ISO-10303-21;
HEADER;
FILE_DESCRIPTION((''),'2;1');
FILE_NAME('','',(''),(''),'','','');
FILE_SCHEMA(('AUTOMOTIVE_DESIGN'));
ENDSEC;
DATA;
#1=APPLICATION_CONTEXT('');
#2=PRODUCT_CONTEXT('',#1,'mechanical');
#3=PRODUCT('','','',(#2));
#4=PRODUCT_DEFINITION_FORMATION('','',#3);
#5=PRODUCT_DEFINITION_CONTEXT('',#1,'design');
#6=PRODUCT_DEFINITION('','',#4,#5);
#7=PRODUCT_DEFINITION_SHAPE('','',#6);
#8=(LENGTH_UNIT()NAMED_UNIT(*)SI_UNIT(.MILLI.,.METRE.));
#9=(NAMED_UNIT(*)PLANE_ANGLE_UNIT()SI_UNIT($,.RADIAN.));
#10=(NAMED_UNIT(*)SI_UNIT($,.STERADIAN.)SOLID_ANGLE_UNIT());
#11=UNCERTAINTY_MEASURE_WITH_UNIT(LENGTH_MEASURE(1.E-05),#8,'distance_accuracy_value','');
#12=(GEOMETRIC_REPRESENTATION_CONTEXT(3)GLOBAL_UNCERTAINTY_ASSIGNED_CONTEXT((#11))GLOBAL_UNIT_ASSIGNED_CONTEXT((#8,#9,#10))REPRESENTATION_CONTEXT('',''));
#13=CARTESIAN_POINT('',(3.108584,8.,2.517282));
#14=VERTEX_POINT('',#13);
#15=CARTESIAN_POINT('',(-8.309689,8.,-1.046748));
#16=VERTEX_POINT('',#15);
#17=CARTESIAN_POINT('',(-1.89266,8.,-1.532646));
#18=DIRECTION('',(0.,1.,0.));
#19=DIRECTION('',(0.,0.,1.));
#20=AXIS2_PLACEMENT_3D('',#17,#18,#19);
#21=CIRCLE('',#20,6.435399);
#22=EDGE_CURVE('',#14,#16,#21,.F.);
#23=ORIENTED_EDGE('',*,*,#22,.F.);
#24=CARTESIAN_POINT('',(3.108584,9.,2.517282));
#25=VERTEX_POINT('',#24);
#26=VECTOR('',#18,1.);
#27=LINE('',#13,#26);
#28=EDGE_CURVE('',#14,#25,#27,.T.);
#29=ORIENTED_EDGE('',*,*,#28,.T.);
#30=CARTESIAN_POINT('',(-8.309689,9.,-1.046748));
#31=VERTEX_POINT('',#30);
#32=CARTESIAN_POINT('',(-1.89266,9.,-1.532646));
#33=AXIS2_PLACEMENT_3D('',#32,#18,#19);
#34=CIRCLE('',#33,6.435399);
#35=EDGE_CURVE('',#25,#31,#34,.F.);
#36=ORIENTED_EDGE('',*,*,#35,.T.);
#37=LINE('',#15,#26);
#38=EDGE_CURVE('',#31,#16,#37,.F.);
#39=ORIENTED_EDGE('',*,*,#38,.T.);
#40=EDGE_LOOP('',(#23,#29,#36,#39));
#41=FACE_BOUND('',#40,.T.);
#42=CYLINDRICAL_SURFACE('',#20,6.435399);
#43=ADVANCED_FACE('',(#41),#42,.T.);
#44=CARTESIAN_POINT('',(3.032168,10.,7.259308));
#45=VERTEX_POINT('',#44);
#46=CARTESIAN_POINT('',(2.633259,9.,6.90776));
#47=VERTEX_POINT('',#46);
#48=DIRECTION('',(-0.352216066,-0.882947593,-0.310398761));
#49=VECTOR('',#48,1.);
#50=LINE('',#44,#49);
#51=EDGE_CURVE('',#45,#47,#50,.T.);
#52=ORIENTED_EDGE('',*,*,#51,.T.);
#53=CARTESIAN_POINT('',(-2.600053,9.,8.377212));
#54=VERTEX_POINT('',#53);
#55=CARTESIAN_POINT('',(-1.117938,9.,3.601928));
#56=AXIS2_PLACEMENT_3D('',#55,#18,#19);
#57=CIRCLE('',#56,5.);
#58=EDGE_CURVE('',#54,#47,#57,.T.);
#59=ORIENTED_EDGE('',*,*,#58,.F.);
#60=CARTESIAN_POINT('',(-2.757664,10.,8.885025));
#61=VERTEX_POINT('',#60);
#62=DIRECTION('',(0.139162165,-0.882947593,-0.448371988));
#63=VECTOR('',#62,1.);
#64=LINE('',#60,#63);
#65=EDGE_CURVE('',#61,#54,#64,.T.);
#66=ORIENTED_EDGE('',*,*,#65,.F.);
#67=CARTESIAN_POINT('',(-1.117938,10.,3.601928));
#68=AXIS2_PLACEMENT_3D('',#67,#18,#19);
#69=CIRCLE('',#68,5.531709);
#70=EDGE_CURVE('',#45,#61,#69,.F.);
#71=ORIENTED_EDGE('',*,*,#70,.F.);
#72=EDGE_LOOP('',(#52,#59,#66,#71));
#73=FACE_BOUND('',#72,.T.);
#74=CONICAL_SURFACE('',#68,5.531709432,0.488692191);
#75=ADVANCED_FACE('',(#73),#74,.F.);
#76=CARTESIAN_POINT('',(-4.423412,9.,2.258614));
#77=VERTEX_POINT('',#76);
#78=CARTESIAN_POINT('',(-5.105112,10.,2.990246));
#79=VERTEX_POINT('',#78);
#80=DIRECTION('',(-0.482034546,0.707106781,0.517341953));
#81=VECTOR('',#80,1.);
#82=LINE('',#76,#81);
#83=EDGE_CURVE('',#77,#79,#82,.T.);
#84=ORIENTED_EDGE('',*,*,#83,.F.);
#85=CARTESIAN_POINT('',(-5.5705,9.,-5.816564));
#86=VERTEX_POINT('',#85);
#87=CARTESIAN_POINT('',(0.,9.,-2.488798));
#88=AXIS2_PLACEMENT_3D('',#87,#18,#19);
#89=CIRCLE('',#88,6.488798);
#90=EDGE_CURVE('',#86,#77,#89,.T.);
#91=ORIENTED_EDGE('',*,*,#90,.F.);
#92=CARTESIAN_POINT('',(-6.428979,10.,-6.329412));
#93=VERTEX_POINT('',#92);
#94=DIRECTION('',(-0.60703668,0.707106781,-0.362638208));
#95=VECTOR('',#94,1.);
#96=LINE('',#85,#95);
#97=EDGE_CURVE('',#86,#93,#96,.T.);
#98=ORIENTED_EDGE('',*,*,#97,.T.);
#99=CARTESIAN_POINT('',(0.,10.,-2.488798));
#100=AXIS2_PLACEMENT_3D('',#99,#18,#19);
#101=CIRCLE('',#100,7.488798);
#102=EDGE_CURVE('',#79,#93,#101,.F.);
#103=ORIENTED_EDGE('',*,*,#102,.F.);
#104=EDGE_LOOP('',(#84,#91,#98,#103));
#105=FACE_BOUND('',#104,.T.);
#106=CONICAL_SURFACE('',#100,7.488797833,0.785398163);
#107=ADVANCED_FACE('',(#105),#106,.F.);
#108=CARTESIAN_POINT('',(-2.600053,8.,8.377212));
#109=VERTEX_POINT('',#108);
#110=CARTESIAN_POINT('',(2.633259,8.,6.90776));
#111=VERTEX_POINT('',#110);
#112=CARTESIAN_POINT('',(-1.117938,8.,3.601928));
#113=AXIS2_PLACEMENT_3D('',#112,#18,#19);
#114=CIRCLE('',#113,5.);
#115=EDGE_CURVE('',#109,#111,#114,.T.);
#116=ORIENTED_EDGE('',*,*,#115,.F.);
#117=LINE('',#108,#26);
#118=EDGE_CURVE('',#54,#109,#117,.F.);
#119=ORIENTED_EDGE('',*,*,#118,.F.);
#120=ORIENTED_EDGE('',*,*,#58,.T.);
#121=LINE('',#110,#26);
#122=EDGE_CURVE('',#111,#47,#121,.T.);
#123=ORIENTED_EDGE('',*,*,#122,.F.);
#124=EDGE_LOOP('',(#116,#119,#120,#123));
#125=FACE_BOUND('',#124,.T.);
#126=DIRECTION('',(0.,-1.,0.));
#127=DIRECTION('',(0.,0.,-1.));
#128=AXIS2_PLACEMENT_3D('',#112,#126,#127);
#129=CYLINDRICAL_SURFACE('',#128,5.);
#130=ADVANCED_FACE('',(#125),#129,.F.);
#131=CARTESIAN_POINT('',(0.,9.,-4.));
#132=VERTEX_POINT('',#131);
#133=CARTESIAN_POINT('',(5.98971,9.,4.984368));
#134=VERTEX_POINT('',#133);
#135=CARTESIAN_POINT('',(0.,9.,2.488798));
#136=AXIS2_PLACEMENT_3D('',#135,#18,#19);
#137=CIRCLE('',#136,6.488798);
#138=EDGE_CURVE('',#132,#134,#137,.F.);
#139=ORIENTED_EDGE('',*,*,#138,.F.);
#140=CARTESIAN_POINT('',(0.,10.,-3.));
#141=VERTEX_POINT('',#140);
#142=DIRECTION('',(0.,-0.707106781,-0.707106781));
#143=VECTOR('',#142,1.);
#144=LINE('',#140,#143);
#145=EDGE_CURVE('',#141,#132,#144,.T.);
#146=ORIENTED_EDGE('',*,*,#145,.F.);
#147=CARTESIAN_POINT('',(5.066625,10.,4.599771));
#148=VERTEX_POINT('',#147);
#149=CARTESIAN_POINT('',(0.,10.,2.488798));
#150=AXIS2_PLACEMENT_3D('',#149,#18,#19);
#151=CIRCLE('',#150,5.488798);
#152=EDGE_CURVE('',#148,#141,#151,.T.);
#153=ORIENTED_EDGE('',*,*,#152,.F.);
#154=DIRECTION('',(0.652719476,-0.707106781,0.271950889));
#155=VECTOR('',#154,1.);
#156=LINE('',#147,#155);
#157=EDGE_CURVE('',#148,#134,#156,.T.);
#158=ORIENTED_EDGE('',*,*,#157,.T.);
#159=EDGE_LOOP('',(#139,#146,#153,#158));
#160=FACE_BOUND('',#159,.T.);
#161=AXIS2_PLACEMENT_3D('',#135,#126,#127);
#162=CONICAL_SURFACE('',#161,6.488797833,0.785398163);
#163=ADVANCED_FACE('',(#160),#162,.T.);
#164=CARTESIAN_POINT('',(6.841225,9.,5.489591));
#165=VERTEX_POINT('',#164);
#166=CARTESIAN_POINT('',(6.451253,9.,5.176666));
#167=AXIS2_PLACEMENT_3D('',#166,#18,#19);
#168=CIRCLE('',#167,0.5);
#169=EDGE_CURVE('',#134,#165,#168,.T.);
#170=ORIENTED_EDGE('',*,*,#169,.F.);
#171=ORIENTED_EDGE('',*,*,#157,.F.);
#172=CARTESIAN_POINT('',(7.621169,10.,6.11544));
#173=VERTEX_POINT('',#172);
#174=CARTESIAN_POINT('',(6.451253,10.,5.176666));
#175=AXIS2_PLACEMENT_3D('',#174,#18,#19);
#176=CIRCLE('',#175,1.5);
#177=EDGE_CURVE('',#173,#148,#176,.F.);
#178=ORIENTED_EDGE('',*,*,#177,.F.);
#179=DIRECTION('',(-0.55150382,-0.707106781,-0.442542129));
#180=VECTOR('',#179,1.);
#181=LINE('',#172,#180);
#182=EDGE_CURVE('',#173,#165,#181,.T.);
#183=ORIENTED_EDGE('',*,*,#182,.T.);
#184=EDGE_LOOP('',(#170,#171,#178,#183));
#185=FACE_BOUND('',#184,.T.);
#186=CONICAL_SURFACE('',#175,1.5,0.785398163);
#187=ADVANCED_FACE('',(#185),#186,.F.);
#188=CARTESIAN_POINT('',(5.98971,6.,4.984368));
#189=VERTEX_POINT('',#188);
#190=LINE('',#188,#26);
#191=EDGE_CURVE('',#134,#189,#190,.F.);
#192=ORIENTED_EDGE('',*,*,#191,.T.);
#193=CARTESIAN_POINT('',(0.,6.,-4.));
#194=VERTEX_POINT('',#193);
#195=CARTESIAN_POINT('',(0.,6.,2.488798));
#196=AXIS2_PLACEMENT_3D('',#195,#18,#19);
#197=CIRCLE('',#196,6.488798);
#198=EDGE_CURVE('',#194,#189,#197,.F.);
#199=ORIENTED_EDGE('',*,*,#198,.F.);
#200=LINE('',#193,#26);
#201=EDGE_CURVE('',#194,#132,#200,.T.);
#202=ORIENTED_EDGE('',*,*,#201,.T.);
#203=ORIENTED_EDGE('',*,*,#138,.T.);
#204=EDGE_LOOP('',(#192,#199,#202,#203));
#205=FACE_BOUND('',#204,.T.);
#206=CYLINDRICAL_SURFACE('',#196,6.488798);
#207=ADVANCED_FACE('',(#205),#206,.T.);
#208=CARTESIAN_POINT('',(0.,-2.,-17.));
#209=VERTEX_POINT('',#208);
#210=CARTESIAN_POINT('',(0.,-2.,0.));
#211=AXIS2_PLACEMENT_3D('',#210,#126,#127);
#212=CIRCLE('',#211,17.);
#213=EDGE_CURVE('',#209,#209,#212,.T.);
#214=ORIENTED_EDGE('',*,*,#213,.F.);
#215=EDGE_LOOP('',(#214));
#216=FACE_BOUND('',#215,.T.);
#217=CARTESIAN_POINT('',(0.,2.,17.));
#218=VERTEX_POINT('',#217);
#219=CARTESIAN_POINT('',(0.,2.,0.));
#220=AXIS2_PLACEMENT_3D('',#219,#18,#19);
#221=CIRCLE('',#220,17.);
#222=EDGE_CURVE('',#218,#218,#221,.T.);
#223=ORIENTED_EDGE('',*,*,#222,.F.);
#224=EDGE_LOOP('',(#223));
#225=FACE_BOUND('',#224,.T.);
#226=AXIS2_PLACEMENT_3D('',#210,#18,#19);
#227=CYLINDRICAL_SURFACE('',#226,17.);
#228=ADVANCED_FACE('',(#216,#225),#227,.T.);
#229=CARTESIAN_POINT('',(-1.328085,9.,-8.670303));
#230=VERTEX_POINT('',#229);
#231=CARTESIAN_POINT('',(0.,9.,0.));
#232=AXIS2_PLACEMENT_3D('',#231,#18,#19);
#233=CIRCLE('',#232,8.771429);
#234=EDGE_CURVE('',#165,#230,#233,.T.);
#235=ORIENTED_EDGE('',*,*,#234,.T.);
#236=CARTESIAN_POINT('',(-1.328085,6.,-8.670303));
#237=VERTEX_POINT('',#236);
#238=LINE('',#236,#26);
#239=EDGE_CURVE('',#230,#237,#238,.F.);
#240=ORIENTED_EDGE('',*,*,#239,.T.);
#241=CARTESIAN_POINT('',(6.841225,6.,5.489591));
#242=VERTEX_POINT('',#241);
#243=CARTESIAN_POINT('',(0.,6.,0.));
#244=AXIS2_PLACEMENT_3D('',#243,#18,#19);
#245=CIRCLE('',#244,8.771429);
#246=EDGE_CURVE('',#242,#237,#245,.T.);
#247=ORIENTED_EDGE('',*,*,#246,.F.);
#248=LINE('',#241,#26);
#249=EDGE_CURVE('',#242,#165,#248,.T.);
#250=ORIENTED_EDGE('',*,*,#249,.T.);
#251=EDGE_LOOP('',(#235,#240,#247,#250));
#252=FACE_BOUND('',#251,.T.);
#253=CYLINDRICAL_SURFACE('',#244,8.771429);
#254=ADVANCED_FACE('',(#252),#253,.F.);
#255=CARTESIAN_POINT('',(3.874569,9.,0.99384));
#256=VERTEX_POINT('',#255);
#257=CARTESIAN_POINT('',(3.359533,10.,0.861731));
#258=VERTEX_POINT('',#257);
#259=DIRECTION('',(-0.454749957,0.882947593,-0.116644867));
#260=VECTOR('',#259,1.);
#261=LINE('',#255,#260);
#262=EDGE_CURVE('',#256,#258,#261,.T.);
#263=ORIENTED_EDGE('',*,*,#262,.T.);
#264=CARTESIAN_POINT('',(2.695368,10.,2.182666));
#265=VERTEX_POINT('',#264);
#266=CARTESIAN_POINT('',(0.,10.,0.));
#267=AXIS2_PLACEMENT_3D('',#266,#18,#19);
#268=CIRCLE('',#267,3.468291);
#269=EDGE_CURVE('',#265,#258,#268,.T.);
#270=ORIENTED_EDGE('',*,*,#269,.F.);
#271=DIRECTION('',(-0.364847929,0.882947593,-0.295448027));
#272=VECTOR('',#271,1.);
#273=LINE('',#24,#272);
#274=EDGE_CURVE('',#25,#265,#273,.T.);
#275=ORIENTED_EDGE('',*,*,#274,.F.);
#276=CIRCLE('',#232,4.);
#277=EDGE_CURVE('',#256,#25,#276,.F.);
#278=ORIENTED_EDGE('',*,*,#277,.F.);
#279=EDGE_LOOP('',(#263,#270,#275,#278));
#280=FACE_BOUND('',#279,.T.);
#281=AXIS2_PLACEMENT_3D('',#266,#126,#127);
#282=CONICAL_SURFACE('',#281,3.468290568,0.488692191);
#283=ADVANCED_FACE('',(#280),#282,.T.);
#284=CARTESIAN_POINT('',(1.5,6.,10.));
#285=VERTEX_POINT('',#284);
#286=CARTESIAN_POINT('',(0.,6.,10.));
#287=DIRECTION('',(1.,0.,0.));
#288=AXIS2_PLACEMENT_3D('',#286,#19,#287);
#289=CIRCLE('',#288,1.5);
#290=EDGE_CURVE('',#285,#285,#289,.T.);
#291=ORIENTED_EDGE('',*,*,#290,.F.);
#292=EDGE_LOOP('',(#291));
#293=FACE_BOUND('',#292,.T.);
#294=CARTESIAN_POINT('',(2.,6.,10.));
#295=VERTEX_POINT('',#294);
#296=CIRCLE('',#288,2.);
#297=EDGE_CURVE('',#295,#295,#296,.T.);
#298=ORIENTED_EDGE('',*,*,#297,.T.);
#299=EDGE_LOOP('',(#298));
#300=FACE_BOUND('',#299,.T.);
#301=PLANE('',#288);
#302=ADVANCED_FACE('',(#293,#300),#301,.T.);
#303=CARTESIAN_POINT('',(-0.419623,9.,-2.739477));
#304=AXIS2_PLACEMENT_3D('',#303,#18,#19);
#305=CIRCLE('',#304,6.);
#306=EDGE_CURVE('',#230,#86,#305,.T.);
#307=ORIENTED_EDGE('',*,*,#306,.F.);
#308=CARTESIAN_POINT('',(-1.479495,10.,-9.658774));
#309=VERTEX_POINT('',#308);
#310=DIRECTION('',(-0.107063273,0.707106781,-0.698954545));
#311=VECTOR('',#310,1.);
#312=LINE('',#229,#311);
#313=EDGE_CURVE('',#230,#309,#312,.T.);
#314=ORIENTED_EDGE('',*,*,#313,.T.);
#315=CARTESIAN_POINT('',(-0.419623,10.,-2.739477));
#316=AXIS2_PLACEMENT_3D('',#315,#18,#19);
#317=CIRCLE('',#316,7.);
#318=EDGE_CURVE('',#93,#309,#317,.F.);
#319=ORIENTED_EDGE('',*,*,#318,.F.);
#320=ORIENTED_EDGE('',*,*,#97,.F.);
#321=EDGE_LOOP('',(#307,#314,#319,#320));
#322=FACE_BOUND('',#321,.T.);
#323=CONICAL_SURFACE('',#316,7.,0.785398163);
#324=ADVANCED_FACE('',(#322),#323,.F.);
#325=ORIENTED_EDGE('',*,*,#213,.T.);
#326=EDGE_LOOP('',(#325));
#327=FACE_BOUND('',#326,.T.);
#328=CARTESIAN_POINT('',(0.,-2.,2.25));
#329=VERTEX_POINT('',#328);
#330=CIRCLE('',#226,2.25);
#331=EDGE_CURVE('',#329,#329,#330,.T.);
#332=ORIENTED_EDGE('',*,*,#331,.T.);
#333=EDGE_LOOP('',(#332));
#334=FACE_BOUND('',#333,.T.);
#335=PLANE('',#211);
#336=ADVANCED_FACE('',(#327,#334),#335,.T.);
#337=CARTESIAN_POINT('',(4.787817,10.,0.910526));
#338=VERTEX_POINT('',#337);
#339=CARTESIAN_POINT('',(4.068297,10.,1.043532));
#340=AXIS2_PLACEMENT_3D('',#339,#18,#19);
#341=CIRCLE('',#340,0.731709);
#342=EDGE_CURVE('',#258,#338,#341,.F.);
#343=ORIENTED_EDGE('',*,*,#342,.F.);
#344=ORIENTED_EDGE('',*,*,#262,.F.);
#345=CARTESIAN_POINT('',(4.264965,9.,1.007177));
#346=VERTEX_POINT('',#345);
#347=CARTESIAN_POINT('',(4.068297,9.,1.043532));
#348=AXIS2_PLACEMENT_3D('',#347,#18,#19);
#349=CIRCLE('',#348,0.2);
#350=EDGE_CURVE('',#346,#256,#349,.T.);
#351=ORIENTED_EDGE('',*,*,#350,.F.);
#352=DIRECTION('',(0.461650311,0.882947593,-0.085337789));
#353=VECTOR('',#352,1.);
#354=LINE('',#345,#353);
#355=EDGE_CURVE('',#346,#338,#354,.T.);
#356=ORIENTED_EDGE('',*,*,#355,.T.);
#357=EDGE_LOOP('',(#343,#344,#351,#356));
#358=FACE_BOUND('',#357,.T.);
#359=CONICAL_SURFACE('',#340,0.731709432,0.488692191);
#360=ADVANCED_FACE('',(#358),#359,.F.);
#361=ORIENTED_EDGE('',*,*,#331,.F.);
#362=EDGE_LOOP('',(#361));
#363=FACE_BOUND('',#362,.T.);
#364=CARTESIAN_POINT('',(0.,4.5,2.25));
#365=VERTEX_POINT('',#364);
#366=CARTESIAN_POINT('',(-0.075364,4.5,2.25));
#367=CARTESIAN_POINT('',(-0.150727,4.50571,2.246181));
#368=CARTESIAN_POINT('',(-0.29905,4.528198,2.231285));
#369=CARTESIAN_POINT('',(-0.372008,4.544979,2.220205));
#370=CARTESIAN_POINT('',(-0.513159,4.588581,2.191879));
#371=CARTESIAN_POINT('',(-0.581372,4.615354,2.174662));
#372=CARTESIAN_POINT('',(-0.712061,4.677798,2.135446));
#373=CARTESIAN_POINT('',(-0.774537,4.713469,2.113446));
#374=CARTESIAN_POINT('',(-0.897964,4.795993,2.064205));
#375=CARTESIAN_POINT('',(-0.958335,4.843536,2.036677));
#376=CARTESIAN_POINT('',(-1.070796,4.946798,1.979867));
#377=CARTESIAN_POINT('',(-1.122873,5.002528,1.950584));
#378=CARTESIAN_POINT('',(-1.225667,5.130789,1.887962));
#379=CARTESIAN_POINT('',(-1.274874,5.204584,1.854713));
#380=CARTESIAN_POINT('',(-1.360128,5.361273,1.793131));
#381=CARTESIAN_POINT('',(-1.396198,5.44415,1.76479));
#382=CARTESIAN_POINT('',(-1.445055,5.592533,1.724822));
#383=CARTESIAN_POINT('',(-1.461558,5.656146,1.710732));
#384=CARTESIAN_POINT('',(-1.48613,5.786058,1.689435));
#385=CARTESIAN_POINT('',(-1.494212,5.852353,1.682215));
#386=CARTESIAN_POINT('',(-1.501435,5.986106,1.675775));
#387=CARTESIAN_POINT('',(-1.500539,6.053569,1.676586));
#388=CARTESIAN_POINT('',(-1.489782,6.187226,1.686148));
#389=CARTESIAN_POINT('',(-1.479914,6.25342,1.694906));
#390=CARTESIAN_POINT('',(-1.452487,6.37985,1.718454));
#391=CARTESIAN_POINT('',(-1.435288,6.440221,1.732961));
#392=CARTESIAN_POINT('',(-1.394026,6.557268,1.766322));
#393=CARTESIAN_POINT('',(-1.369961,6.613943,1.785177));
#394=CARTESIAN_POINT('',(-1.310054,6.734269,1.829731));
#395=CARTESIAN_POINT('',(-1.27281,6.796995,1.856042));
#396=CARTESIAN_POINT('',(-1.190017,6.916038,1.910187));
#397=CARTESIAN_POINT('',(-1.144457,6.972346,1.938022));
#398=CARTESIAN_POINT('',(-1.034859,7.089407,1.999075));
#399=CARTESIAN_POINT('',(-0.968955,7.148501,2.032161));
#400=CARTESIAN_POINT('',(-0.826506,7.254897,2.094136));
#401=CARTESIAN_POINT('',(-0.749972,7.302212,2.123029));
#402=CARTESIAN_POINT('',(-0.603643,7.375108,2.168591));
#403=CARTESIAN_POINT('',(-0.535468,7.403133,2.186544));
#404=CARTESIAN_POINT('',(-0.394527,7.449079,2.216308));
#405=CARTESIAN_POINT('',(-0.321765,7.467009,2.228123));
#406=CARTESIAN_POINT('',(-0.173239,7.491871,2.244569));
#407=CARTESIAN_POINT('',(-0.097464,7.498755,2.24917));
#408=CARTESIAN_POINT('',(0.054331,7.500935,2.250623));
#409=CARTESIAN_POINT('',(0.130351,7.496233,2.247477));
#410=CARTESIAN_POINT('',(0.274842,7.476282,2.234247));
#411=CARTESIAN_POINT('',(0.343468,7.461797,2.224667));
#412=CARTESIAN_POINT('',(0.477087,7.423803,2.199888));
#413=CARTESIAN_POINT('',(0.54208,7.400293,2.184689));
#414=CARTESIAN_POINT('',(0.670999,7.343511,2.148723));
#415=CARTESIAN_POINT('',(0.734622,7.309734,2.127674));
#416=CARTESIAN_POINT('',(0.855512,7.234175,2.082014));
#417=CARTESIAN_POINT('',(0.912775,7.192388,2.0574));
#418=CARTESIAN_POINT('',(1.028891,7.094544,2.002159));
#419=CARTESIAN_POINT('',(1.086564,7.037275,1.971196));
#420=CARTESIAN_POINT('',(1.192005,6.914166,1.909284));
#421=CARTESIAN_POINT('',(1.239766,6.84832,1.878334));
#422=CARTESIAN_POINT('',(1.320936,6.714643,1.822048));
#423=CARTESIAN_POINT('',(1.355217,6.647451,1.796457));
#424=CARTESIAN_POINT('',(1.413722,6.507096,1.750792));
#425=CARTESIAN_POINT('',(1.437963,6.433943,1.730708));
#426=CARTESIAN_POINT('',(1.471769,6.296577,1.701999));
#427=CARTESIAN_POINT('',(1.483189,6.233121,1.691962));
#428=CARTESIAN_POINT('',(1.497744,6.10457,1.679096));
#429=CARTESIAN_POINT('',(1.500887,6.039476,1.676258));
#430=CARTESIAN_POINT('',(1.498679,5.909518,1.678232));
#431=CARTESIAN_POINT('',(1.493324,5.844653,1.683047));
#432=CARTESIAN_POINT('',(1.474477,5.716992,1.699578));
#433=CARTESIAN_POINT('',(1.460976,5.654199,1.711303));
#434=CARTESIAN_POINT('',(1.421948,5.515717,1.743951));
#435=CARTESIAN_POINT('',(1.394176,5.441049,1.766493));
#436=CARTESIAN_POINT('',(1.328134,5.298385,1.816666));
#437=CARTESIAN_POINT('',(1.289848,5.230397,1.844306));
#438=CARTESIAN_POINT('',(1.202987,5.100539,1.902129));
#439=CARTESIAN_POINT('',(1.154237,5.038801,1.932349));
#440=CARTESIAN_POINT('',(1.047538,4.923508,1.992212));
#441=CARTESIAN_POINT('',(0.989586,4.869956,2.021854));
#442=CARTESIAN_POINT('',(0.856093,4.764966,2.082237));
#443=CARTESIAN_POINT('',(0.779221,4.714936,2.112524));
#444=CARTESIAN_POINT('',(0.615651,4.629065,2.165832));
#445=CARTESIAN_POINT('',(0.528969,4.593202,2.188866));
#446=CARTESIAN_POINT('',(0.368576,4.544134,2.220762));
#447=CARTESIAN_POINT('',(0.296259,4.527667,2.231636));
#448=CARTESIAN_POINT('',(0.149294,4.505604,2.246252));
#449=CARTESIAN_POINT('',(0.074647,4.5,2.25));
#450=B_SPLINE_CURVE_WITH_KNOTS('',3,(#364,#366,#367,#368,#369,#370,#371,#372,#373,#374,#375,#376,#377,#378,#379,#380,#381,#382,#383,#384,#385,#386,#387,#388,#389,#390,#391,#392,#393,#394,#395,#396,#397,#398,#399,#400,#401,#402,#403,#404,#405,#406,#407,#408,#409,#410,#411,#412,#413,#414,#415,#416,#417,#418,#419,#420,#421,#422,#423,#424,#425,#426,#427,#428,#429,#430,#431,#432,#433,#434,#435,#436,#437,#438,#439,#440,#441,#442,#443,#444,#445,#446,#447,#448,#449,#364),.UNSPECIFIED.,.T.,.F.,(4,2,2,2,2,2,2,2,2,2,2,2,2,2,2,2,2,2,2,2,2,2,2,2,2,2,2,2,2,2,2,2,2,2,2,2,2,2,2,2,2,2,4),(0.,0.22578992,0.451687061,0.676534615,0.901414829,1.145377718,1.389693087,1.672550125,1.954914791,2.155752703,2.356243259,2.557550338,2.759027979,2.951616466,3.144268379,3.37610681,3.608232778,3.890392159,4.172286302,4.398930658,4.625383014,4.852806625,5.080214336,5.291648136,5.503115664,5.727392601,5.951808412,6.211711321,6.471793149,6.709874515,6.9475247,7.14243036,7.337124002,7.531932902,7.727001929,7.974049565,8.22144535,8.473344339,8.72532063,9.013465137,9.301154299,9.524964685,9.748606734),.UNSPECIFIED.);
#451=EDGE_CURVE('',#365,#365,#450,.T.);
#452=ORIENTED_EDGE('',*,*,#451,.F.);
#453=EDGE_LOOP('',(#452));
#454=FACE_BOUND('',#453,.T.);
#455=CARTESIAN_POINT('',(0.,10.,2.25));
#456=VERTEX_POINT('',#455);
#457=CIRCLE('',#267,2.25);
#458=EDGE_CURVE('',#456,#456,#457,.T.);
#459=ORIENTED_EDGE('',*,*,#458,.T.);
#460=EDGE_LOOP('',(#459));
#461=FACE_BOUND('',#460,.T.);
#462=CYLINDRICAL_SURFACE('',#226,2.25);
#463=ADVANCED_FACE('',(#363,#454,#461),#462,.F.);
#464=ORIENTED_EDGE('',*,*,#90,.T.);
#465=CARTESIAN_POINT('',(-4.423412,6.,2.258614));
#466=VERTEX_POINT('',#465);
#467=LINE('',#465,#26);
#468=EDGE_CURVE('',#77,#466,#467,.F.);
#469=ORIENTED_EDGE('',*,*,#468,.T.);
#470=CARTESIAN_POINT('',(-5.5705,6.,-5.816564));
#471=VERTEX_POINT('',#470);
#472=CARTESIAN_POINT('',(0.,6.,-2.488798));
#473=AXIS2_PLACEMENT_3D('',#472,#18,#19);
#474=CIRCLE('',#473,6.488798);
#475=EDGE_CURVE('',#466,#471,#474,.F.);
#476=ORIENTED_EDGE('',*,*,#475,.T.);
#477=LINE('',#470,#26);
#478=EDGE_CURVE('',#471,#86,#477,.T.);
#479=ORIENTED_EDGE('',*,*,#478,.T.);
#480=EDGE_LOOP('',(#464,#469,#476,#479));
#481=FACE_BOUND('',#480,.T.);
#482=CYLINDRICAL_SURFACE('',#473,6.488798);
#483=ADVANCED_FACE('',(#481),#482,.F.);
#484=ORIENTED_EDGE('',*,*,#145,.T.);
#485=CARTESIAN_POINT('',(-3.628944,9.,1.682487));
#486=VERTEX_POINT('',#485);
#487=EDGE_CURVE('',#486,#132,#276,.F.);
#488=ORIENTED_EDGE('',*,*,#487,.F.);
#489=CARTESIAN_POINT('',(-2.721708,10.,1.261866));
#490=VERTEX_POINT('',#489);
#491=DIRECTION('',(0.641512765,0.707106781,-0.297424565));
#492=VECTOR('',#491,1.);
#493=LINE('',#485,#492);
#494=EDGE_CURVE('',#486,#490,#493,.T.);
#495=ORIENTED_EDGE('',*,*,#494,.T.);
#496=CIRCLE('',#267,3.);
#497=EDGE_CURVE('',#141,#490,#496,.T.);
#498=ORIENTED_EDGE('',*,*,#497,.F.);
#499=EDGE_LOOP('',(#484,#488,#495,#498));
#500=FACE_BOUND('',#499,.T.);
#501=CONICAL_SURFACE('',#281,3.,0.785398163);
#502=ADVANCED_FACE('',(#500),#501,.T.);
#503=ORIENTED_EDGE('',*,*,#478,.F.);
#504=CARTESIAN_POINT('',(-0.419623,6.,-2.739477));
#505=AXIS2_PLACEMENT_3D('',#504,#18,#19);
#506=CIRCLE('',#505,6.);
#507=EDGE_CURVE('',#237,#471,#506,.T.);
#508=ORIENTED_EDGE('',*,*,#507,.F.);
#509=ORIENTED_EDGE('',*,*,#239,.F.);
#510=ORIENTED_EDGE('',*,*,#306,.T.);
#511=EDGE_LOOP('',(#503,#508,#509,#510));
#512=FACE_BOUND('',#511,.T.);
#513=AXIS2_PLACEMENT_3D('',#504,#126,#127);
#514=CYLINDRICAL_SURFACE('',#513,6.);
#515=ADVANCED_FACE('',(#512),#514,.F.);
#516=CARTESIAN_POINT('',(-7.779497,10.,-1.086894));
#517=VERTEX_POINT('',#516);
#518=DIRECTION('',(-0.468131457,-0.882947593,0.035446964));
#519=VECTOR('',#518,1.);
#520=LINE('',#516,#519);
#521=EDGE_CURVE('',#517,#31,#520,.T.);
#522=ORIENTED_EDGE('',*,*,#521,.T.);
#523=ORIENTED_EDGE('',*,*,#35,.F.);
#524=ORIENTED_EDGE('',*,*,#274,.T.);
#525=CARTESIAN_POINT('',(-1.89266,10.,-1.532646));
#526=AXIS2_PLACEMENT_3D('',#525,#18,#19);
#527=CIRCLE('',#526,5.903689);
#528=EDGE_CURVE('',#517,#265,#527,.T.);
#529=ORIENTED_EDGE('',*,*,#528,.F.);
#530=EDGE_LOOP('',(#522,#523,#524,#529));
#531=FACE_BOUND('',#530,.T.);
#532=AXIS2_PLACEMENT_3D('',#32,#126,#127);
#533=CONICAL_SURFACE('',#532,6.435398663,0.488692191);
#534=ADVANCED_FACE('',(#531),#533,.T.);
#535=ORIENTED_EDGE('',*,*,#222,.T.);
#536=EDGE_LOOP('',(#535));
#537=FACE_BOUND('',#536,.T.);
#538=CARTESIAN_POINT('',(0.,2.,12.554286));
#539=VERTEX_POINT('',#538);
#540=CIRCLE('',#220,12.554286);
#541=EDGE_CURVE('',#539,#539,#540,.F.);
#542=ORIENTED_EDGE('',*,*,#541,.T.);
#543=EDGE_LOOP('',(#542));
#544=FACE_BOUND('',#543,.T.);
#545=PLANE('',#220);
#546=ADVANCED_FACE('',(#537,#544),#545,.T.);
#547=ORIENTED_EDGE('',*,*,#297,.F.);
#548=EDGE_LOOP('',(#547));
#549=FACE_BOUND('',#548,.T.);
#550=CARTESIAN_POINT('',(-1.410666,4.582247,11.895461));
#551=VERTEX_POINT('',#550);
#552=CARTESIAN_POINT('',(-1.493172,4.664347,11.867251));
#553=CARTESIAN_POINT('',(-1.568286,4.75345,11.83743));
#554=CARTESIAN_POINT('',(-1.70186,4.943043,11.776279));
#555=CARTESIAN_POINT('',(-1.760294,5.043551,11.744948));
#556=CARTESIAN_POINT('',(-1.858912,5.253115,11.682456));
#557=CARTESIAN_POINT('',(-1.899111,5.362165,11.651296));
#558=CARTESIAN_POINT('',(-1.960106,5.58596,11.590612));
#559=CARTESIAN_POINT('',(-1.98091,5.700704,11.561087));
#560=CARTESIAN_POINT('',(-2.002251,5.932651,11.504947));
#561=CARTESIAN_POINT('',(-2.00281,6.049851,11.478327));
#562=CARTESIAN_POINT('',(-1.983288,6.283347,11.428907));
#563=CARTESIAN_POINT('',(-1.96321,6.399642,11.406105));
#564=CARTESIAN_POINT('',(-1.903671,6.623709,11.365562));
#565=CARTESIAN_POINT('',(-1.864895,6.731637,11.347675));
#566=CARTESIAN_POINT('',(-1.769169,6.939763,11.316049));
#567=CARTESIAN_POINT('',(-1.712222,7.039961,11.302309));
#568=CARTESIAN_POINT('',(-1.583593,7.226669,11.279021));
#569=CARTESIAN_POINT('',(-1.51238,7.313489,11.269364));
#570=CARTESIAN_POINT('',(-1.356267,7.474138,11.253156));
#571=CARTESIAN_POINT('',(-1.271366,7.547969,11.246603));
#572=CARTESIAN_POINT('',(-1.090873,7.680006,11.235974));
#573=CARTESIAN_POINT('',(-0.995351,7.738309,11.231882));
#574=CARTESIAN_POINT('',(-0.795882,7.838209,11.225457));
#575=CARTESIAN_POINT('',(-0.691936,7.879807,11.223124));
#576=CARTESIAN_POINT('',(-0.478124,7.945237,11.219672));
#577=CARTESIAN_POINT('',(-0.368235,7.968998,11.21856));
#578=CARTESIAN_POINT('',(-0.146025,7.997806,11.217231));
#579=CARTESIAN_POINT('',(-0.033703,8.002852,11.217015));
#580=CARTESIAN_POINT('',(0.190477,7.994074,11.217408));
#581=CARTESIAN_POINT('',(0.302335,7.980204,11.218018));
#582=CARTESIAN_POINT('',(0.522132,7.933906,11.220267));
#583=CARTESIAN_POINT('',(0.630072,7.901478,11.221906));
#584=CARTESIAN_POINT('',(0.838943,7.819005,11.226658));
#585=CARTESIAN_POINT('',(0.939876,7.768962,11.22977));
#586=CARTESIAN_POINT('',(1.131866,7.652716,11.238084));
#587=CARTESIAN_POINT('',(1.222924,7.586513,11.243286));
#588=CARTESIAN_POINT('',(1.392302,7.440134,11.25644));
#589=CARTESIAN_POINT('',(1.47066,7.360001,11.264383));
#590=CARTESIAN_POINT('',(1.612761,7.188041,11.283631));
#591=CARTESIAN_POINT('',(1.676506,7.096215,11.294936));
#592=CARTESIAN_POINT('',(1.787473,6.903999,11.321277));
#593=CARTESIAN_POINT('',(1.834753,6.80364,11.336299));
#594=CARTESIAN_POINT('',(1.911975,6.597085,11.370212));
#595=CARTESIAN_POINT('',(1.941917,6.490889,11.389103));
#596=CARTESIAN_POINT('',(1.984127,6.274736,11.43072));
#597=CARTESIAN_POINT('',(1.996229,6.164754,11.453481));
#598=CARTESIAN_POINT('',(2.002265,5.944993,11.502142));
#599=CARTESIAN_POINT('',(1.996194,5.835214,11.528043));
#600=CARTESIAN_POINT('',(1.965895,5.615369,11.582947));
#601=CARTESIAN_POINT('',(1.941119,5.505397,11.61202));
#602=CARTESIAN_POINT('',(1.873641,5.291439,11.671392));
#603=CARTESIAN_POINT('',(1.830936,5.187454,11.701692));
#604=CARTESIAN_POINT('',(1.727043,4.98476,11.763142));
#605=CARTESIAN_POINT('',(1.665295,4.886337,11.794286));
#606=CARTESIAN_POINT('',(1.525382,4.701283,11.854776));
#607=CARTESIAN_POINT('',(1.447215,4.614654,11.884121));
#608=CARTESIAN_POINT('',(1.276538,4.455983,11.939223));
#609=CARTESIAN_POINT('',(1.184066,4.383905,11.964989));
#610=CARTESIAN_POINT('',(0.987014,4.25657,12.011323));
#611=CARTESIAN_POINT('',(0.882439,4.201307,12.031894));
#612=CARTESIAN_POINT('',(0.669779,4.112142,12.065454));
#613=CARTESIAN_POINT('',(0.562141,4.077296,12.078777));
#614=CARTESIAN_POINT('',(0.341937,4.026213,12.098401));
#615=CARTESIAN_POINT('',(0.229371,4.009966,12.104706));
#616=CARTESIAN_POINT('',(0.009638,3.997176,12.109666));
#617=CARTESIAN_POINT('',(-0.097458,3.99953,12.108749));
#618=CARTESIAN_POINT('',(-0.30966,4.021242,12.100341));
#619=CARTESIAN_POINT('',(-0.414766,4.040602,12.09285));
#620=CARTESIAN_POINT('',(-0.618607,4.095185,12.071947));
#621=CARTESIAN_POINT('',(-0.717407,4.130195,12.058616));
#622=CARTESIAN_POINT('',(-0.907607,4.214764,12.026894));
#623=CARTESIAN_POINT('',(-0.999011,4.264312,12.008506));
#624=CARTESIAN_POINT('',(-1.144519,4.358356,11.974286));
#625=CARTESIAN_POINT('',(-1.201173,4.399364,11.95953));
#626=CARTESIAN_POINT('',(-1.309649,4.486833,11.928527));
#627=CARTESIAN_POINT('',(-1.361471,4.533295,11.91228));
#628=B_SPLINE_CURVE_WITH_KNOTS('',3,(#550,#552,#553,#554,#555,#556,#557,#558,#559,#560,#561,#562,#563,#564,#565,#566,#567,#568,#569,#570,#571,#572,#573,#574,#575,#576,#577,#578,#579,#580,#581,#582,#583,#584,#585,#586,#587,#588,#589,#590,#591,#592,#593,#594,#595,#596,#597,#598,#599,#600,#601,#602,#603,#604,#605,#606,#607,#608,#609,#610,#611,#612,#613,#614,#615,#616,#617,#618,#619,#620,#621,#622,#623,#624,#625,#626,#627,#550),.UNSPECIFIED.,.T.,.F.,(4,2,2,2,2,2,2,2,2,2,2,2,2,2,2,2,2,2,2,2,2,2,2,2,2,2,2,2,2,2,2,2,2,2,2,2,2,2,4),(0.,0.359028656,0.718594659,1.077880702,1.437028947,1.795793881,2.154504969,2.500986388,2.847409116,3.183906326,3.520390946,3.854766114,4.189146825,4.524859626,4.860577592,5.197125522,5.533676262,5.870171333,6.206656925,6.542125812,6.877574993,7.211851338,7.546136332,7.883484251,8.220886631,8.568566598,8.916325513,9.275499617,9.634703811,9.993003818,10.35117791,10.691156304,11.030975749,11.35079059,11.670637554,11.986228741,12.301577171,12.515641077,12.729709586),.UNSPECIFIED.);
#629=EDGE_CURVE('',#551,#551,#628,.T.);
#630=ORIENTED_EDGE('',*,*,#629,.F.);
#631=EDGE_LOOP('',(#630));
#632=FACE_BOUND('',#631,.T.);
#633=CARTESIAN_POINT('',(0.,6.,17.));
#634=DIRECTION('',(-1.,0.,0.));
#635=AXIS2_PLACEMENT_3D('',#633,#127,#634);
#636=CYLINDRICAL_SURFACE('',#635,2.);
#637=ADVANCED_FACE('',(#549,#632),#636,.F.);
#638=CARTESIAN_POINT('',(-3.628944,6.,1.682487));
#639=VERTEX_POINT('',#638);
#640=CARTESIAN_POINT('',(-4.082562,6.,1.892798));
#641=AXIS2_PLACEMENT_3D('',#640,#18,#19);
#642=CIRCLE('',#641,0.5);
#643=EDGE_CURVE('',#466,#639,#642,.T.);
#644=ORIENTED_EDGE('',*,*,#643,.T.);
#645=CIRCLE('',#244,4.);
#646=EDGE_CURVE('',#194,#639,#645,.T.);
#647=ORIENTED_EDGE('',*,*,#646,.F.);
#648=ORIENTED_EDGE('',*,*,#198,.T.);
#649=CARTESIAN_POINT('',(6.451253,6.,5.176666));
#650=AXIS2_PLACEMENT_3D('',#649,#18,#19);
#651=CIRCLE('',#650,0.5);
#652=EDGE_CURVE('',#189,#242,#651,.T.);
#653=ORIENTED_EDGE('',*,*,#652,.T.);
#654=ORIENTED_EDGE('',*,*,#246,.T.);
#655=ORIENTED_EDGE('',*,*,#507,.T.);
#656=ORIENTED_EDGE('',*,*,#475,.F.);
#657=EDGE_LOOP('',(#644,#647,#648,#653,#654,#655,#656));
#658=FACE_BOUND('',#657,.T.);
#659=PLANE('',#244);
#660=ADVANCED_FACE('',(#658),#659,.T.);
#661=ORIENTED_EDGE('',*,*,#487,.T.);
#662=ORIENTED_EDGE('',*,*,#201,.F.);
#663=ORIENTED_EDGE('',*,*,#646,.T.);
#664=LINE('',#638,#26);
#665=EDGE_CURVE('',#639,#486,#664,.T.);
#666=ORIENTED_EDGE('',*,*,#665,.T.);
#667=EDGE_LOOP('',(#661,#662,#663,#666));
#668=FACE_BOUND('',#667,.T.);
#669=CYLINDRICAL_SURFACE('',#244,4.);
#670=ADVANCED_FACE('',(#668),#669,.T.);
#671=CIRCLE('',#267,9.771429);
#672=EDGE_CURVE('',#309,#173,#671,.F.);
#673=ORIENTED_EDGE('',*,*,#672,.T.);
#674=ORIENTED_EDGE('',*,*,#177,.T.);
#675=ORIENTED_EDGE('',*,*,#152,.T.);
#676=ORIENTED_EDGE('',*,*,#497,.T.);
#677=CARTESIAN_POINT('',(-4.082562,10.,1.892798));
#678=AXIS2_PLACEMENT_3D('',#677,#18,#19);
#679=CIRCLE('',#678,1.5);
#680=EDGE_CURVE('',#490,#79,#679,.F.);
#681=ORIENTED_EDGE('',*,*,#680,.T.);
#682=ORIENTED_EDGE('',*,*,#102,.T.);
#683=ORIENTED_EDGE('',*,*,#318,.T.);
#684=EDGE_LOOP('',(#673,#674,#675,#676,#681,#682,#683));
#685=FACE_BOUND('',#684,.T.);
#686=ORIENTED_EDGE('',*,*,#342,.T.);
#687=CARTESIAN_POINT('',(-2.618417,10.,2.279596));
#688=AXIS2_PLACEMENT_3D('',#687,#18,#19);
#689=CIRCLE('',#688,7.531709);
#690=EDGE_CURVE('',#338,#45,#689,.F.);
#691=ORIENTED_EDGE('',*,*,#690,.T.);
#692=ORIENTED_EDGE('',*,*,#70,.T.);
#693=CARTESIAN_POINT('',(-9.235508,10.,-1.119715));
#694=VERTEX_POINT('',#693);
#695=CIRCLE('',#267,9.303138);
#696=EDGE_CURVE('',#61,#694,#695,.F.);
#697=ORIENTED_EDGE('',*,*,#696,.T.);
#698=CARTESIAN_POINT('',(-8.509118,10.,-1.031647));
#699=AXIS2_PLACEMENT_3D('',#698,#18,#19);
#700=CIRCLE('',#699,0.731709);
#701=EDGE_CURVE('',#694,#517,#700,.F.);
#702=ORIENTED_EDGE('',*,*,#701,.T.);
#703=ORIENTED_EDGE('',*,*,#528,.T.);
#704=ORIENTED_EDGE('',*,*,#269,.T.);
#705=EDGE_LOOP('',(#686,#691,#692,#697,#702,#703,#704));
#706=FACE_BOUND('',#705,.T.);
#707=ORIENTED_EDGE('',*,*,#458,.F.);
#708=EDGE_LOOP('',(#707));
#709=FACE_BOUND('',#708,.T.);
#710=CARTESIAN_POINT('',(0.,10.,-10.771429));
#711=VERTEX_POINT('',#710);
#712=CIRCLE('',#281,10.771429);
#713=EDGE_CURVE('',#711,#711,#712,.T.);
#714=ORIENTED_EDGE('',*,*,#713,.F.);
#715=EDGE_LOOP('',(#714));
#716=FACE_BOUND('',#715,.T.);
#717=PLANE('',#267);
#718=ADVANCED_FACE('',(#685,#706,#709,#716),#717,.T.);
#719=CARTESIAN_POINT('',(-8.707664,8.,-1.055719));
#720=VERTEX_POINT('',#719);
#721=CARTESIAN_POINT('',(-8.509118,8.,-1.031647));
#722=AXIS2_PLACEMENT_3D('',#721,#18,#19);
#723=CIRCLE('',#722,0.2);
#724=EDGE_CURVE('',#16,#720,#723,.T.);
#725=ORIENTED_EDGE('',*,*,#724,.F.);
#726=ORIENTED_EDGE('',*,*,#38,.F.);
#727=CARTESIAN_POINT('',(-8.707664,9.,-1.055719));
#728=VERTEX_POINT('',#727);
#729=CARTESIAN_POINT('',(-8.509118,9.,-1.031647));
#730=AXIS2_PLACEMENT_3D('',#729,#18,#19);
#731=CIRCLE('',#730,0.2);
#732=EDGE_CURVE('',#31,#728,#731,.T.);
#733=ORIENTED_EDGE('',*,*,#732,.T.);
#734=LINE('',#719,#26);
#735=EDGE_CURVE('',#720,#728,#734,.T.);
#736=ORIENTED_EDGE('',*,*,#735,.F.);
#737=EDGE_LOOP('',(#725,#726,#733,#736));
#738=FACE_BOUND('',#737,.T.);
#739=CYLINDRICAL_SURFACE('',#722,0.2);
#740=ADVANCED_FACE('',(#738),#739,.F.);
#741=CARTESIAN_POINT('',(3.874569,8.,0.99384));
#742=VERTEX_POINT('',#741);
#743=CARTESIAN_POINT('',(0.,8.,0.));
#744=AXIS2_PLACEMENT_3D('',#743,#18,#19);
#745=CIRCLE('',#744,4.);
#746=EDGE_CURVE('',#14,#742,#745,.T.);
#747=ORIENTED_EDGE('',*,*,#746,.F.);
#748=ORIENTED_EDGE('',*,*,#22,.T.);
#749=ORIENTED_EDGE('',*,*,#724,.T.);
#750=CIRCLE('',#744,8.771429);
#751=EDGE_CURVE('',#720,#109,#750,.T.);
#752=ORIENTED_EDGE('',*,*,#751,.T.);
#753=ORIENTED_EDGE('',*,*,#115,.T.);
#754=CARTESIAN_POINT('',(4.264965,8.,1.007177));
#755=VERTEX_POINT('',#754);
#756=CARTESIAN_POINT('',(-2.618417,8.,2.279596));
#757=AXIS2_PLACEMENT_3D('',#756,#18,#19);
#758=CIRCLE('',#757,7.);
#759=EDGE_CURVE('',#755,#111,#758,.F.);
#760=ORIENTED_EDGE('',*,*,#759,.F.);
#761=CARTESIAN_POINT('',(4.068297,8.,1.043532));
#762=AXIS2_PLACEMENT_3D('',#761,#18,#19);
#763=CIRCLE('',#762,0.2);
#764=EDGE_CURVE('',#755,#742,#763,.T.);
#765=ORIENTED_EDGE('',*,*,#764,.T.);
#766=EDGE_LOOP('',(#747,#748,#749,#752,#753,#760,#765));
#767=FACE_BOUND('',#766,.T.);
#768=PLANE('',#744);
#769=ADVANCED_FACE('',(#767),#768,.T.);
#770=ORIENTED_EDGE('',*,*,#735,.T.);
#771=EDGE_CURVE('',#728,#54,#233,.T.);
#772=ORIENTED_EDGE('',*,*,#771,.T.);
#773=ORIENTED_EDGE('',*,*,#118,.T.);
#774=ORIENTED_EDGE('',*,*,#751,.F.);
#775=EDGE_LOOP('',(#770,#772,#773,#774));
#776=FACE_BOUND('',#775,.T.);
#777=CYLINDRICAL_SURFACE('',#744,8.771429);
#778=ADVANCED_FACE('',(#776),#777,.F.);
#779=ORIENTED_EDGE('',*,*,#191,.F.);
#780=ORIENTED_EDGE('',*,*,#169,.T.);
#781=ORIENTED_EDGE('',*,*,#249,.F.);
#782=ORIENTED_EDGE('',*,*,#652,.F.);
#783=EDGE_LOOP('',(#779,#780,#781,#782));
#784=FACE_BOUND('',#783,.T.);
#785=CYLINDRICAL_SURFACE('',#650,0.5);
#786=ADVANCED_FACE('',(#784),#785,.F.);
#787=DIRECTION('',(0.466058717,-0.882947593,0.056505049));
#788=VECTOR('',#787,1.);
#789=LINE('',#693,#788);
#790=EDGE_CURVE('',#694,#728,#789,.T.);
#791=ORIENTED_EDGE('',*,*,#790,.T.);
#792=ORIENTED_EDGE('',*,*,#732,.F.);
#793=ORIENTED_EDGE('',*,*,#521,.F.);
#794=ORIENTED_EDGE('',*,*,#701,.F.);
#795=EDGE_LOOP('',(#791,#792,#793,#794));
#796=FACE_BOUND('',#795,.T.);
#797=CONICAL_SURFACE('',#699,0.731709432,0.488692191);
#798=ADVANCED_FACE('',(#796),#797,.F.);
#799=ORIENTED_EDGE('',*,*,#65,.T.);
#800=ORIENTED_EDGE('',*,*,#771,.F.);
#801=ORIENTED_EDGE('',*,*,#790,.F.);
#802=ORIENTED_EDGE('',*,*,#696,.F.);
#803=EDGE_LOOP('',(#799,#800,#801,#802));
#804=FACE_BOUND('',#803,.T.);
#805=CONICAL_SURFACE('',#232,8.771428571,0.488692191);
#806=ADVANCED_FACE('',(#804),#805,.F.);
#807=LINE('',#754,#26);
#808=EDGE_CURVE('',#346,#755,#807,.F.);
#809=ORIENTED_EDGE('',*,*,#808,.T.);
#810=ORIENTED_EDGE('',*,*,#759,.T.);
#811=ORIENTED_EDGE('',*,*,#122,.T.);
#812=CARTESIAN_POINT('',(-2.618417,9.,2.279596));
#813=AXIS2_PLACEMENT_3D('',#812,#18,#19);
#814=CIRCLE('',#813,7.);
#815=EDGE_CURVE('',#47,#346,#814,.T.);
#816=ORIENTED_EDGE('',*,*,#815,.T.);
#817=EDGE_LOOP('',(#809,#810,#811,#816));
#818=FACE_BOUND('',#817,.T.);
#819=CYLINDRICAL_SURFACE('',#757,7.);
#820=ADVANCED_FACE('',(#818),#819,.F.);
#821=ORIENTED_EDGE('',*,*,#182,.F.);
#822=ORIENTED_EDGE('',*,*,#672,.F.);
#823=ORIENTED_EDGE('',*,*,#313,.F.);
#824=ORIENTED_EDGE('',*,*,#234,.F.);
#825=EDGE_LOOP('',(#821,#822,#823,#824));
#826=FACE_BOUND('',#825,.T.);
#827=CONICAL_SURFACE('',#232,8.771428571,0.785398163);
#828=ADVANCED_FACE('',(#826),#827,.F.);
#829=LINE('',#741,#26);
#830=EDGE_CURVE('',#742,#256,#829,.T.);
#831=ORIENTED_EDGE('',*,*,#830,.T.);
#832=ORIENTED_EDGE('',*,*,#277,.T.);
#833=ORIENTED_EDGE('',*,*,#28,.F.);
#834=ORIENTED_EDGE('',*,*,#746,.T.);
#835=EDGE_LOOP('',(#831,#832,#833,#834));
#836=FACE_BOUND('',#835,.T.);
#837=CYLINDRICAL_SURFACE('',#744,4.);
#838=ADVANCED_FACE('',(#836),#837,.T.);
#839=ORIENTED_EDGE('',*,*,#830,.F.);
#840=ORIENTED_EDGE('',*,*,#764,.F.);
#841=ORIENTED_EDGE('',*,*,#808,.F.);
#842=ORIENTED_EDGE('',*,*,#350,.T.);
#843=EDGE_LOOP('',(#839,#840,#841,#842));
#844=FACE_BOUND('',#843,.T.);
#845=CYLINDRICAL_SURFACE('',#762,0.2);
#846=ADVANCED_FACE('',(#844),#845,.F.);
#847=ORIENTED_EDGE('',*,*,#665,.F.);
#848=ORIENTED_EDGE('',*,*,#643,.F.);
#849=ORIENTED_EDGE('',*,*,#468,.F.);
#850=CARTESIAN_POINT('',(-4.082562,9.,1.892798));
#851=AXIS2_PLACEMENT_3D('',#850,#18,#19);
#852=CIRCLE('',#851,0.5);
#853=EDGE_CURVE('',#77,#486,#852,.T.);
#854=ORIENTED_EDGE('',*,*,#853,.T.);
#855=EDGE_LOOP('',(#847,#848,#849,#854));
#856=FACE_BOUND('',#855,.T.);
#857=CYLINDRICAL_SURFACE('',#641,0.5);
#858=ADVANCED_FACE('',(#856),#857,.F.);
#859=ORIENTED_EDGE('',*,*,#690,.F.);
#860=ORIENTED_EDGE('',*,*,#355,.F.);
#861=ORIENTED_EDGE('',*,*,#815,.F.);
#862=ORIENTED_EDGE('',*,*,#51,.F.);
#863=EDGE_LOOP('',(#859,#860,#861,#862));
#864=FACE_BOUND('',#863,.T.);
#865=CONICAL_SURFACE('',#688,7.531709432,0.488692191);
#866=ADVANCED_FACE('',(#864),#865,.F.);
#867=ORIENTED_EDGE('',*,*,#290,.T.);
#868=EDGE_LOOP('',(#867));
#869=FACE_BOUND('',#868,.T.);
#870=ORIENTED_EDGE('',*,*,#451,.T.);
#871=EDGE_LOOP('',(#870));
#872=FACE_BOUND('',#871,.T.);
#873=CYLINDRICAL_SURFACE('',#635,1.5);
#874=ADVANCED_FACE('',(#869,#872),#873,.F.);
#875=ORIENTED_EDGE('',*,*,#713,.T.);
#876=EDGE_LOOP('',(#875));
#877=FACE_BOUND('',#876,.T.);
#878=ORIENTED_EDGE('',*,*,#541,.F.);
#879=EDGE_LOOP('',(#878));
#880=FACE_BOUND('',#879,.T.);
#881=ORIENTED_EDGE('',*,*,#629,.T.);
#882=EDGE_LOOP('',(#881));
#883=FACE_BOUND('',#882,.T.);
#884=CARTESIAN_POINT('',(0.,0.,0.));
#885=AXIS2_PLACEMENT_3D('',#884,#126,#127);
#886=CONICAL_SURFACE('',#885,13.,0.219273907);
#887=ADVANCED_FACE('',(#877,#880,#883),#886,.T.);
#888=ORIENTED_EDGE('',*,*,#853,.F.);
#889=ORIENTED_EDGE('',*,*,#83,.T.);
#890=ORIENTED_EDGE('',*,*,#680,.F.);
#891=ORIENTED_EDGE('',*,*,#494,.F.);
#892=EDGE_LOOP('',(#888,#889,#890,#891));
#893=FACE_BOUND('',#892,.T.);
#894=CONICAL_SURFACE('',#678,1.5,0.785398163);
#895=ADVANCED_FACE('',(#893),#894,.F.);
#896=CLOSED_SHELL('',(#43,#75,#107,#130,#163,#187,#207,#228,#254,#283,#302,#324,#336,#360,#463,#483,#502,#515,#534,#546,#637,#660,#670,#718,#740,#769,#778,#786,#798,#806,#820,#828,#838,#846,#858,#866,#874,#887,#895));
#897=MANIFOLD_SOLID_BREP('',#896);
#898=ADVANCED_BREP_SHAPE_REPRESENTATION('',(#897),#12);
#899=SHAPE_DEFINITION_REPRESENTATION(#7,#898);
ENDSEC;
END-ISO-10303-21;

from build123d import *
from OCP.BRepFilletAPI import BRepFilletAPI_MakeChamfer

# Parameters (mm, degrees)
SKETCH1_R               = 13
BOSS_EXTRUDE1_DEPTH     = 10
SKETCH3_R               = 17
BOSS_EXTRUDE2_DEPTH     = 2
F_4_MM_SHAFT_HOLE_DEPTH = 27.870057685
BOSS_EXTRUDE3_START     = 2
SKETCH9_R               = 17
SKETCH9_R_2             = 2.25
BOSS_EXTRUDE3_DEPTH     = 2
CUT_EXTRUDE3_DEPTH      = 27.038433133
CUT_EXTRUDE4_START      = 10
SKETCH10_3_R            = 2
SKETCH10_3_R_2          = 1.5
CUT_EXTRUDE4_DEPTH      = 17.038433171
CUT_EXTRUDE5_DEPTH      = 4
FILLET3_R               = 6
FILLET4_R               = 0.5
CHAMFER1_SIZE           = 1
CUT_EXTRUDE7_DEPTH      = 2
FILLET6_R               = 5
FILLET8_R               = 0.2
CHAMFER3_SIZE           = 1
CHAMFER3_SIZE2          = 0.531709432


with BuildPart() as part:
    # Sketch1 → Boss-Extrude1 (new body)
    with BuildSketch(Plane(origin=(0, 0, 0), x_dir=(1, 0, 0), z_dir=(0, 1, 0))):
        with Locations(Location((0, 0, 0), (0, 0, 270))):
            Circle(SKETCH1_R)
    extrude(amount=BOSS_EXTRUDE1_DEPTH)

    # Sketch2 → Cut-Revolve1 (revolve, cut)
    with BuildSketch(Plane(origin=(0, 0, 0), x_dir=(0, 0, -1), z_dir=(1, 0, 0)), mode=Mode.PRIVATE) as cut_revolve1_sk:
        Polygon((-13, 0), (-10.771428571, 10), (-13, 10), align=None)
    revolve(cut_revolve1_sk.sketch.rotate(Axis((0, 0, 0), (0, 1, 0)), 180), axis=Axis((0, 0, 0), (0, 1, 0)), mode=Mode.SUBTRACT)

    # Sketch3 → Boss-Extrude2 (add)
    with BuildSketch(Plane(origin=(0, 0, 0), x_dir=(-1, 0, 0), z_dir=(0, -1, 0))):
        with Locations(Location((0, 0, 0), (0, 0, 90))):
            Circle(SKETCH3_R)
    extrude(amount=BOSS_EXTRUDE2_DEPTH)

    # Sketch5 → 4-mm shaft hole (cut, through all)
    with BuildSketch(Plane(origin=(0, 10, 0), x_dir=(1, 0, 0), z_dir=(0, 1, 0))):
        with BuildLine():
            ThreePointArc((1.677050983, 1.5), (0, 2.25), (-1.677050983, 1.5))
            Line((-1.677050983, 1.5), (1.677050983, 1.5))
        make_face()
        with BuildLine():
            Line((1.677050983, 1.5), (-1.677050983, 1.5))
            ThreePointArc((-1.677050983, 1.5), (-0.802849702, -2.101887808), (2.25, 0))
            ThreePointArc((2.25, 0), (2.101887808, 0.802849702), (1.677050983, 1.5))
        make_face()
    extrude(amount=-F_4_MM_SHAFT_HOLE_DEPTH, mode=Mode.SUBTRACT)

    # Sketch9 → Boss-Extrude3 (add)
    with BuildSketch(Plane(origin=(0, 0, 0), x_dir=(1, 0, 0), z_dir=(0, 1, 0)).offset(BOSS_EXTRUDE3_START)):
        with Locations(Location((0, 0, 0), (0, 0, 270))):
            Circle(SKETCH9_R)
        with Locations(Location((0, 0, 0), (0, 0, 270))):
            Circle(SKETCH9_R_2, mode=Mode.SUBTRACT)
    extrude(amount=-BOSS_EXTRUDE3_DEPTH)

    # Sketch10 → Cut-Extrude3 (cut, through all)
    with BuildSketch(Plane.XY):
        with BuildLine():
            ThreePointArc((0, 7.5), (-1.5, 6), (0, 4.5))
            Line((0, 4.5), (0, 7.5))
        make_face()
        with BuildLine():
            Line((0, 7.5), (0, 4.5))
            ThreePointArc((0, 4.5), (1.060660172, 4.939339828), (1.5, 6))
            ThreePointArc((1.5, 6), (1.060660172, 7.060660172), (0, 7.5))
        make_face()
    extrude(amount=CUT_EXTRUDE3_DEPTH, mode=Mode.SUBTRACT)

    # Sketch10<3> → Cut-Extrude4 (cut, through all)
    with BuildSketch(Plane.XY.offset(CUT_EXTRUDE4_START)):
        with Locations(Location((0, 6, 0), (0, 0, 225.143578884))):
            Circle(SKETCH10_3_R)
        with Locations(Location((0, 6, 0), (0, 0, 270))):
            Circle(SKETCH10_3_R_2, mode=Mode.SUBTRACT)
    extrude(amount=CUT_EXTRUDE4_DEPTH, mode=Mode.SUBTRACT)

    # Sketch11 → Cut-Extrude5 (cut)
    with BuildSketch(Plane(origin=(0, 10, 0), x_dir=(1, 0, 0), z_dir=(0, 1, 0))):
        with BuildLine():
            ThreePointArc((3, -8.242448615), (7.185132041, -5.031087033), (8.771428571, 0))
            ThreePointArc((8.771428571, 0), (5.031087033, 7.185132041), (-3, 8.242448615))
            ThreePointArc((-3, 8.242448615), (-6.302331872, 0.944417603), (0, -4))
            ThreePointArc((0, -4), (-4, 0), (0, 4))
            ThreePointArc((0, 4), (6.302331872, -0.944417603), (3, -8.242448615))
        make_face()
    extrude(amount=-CUT_EXTRUDE5_DEPTH, mode=Mode.SUBTRACT)

    # Fillet3
    fillet3_edges = [part.edges().sort_by_distance(p)[0] for p in [
        (-3, 8, -8.242448615),
    ]]
    fillet(fillet3_edges, radius=FILLET3_R)

    # Fillet4
    # the kernel refuses this fillet: 0.5 mm, written as the material it adds along each edge
    with BuildSketch(Plane(origin=(3, 10, 8.242448615), x_dir=(0.676109910174844, 0, -0.7368007799692969), z_dir=(0, -1, 0))) as fillet4_piece_1_section:
        with BuildLine():
            CenterArc((4.592297125, 0.470079575), FILLET4_R, 86.204134404, 163.874166307)
            ThreePointArc((4.625398075, 0.968982699), (2.246212442, 0.801862309), (0, 0))
            ThreePointArc((0, 0), (2.210964653, 0.38829518), (4.421929307, 0))
        make_face()
    fillet4_piece_1 = extrude(amount=15.814513008, mode=Mode.PRIVATE)
    fillet4_piece_1 = split(fillet4_piece_1, bisect_by=Plane(origin=(5.361441464, -2, 6.517574012), z_dir=(0, 1, 0)), keep=Keep.TOP, mode=Mode.PRIVATE)
    add(fillet4_piece_1)
    with BuildSketch(Plane(origin=(0, 10, 4), x_dir=(-0.8427994583990877, 0, -0.5382277147473964), z_dir=(0, -1, 0))) as fillet4_piece_2_section:
        with BuildLine():
            CenterArc((4.574935575, -0.421399729), FILLET4_R, 122.563073018, 157.850467981)
            ThreePointArc((4.665311372, -0.913164119), (2.246019142, -0.899203979), (0, 0))
            ThreePointArc((0, 0), (2.152910859, -0.628802166), (4.305821718, 0))
        make_face()
    fillet4_piece_2 = extrude(amount=14.384601093, mode=Mode.PRIVATE)
    fillet4_piece_2 = fillet4_piece_2 - Plane(origin=(0, 6, 2.911656579), x_dir=(0, 1, 0), z_dir=(0, 0, -1)) * Cylinder(1.5, 48, mode=Mode.PRIVATE)
    fillet4_piece_2 = split(fillet4_piece_2, bisect_by=Plane(origin=(-3.011239117, -2, 2.911656579), z_dir=(0, 1, 0)), keep=Keep.TOP, mode=Mode.PRIVATE)
    add(fillet4_piece_2)

    # Chamfer1
    chamfer1_edges = [part.edges().sort_by_distance(p)[0] for p in [
        (-3.371197834, 10, -2.152910859),
        (5.398969594, 10, -1.110594427),
        (-3.768481471, 10, -7.717945042),
        (7.597652385, 10, -4.383336334),
        (-6.424305098, 10, -1.576218344),
        (6.196119079, 10, 5.606673983),
        (-3.789032474, 10, 2.297570227),
    ]]
    chamfer(chamfer1_edges, length=CHAMFER1_SIZE)

    # Sketch14 → Cut-Extrude7 (cut)
    with BuildSketch(Plane(origin=(0, 10, 0), x_dir=(1, 0, 0), z_dir=(0, 1, 0))):
        with BuildLine():
            ThreePointArc((3.108583846, -2.517281564), (-5.049231929, -4.075420571), (-7.949614017, 3.706965896))
            ThreePointArc((-7.949614017, 3.706965896), (-7.397747824, -4.712885136), (0, -8.771428571))
            ThreePointArc((0, -8.771428571), (3.750591207, -5.184029494), (4, 0))
            ThreePointArc((4, 0), (3.770565964, -1.335227437), (3.108583846, -2.517281564))
        make_face()
    extrude(amount=-CUT_EXTRUDE7_DEPTH, mode=Mode.SUBTRACT)

    # Fillet6
    fillet6_edges = [part.edges().sort_by_distance(p)[0] for p in [
        (0, 9, 8.771428571),
    ]]
    fillet(fillet6_edges, radius=FILLET6_R)

    # Fillet8
    fillet8_edges = [part.edges().sort_by_distance(p)[0] for p in [
        (4, 9, 0),
        (-7.949614017, 9, -3.706965896),
    ]]
    fillet(fillet8_edges, radius=FILLET8_R)

    # Chamfer3: one chamfer whose edges measure the first distance from different faces: ONE call of the kernel's chamfer builder (chamfer() names one face for all edges)
    chamfer3_edges_1 = [part.edges().sort_by_distance(p)[0] for p in [
        (3.573698882, 10, 1.796851775),
    ]]
    chamfer3_side_1 = [part.faces().sort_by_distance(p)[0] for p in [
        (3.573698882, 9, 1.796851775),
    ]]
    chamfer3_edges_2 = [part.edges().sort_by_distance(p)[0] for p in [
        (-3.810129446, 10, 4.610453161),
    ]]
    chamfer3_side_2 = [part.faces().sort_by_distance(p)[0] for p in [
        (-3.810129446, 9, 4.610453161),
    ]]
    chamfer3_edges_3 = [part.edges().sort_by_distance(p)[0] for p in [
        (0.233729709, 10, 8.415761951),
    ]]
    chamfer3_side_3 = [part.faces().sort_by_distance(p)[0] for p in [
        (0.233729709, 9, 8.415761951),
    ]]
    chamfer3_edges_4 = [part.edges().sort_by_distance(p)[0] for p in [
        (-7.362823163, 10, 4.767262763),
    ]]
    chamfer3_side_4 = [part.faces().sort_by_distance(p)[0] for p in [
        (-7.362823163, 9, 4.767262763),
    ]]
    chamfer3_edges_5 = [part.edges().sort_by_distance(p)[0] for p in [
        (4.128369515, 10, 4.145305416),
    ]]
    chamfer3_side_5 = [part.faces().sort_by_distance(p)[0] for p in [
        (4.128369515, 9, 4.145305416),
    ]]
    chamfer3_edges_6 = [part.edges().sort_by_distance(p)[0] for p in [
        (-8.504611001, 10, -1.231596345),
    ]]
    chamfer3_side_6 = [part.faces().sort_by_distance(p)[0] for p in [
        (-8.504611001, 9, -1.231596345),
    ]]
    chamfer3_edges_7 = [part.edges().sort_by_distance(p)[0] for p in [
        (4.075125782, 10, 0.843648275),
    ]]
    chamfer3_side_7 = [part.faces().sort_by_distance(p)[0] for p in [
        (4.075125783, 9, 0.843648274),
    ]]
    chamfer3 = BRepFilletAPI_MakeChamfer(part.part.solid().wrapped)
    for e in chamfer3_edges_1:
        chamfer3.Add(CHAMFER3_SIZE, CHAMFER3_SIZE2, e.wrapped, chamfer3_side_1[0].wrapped)  # the first distance lies on this face
    for e in chamfer3_edges_2:
        chamfer3.Add(CHAMFER3_SIZE, CHAMFER3_SIZE2, e.wrapped, chamfer3_side_2[0].wrapped)  # the first distance lies on this face
    for e in chamfer3_edges_3:
        chamfer3.Add(CHAMFER3_SIZE, CHAMFER3_SIZE2, e.wrapped, chamfer3_side_3[0].wrapped)  # the first distance lies on this face
    for e in chamfer3_edges_4:
        chamfer3.Add(CHAMFER3_SIZE, CHAMFER3_SIZE2, e.wrapped, chamfer3_side_4[0].wrapped)  # the first distance lies on this face
    for e in chamfer3_edges_5:
        chamfer3.Add(CHAMFER3_SIZE, CHAMFER3_SIZE2, e.wrapped, chamfer3_side_5[0].wrapped)  # the first distance lies on this face
    for e in chamfer3_edges_6:
        chamfer3.Add(CHAMFER3_SIZE, CHAMFER3_SIZE2, e.wrapped, chamfer3_side_6[0].wrapped)  # the first distance lies on this face
    for e in chamfer3_edges_7:
        chamfer3.Add(CHAMFER3_SIZE, CHAMFER3_SIZE2, e.wrapped, chamfer3_side_7[0].wrapped)  # the first distance lies on this face
    add(Compound.cast(chamfer3.Shape()), mode=Mode.REPLACE)


solid = part.part
